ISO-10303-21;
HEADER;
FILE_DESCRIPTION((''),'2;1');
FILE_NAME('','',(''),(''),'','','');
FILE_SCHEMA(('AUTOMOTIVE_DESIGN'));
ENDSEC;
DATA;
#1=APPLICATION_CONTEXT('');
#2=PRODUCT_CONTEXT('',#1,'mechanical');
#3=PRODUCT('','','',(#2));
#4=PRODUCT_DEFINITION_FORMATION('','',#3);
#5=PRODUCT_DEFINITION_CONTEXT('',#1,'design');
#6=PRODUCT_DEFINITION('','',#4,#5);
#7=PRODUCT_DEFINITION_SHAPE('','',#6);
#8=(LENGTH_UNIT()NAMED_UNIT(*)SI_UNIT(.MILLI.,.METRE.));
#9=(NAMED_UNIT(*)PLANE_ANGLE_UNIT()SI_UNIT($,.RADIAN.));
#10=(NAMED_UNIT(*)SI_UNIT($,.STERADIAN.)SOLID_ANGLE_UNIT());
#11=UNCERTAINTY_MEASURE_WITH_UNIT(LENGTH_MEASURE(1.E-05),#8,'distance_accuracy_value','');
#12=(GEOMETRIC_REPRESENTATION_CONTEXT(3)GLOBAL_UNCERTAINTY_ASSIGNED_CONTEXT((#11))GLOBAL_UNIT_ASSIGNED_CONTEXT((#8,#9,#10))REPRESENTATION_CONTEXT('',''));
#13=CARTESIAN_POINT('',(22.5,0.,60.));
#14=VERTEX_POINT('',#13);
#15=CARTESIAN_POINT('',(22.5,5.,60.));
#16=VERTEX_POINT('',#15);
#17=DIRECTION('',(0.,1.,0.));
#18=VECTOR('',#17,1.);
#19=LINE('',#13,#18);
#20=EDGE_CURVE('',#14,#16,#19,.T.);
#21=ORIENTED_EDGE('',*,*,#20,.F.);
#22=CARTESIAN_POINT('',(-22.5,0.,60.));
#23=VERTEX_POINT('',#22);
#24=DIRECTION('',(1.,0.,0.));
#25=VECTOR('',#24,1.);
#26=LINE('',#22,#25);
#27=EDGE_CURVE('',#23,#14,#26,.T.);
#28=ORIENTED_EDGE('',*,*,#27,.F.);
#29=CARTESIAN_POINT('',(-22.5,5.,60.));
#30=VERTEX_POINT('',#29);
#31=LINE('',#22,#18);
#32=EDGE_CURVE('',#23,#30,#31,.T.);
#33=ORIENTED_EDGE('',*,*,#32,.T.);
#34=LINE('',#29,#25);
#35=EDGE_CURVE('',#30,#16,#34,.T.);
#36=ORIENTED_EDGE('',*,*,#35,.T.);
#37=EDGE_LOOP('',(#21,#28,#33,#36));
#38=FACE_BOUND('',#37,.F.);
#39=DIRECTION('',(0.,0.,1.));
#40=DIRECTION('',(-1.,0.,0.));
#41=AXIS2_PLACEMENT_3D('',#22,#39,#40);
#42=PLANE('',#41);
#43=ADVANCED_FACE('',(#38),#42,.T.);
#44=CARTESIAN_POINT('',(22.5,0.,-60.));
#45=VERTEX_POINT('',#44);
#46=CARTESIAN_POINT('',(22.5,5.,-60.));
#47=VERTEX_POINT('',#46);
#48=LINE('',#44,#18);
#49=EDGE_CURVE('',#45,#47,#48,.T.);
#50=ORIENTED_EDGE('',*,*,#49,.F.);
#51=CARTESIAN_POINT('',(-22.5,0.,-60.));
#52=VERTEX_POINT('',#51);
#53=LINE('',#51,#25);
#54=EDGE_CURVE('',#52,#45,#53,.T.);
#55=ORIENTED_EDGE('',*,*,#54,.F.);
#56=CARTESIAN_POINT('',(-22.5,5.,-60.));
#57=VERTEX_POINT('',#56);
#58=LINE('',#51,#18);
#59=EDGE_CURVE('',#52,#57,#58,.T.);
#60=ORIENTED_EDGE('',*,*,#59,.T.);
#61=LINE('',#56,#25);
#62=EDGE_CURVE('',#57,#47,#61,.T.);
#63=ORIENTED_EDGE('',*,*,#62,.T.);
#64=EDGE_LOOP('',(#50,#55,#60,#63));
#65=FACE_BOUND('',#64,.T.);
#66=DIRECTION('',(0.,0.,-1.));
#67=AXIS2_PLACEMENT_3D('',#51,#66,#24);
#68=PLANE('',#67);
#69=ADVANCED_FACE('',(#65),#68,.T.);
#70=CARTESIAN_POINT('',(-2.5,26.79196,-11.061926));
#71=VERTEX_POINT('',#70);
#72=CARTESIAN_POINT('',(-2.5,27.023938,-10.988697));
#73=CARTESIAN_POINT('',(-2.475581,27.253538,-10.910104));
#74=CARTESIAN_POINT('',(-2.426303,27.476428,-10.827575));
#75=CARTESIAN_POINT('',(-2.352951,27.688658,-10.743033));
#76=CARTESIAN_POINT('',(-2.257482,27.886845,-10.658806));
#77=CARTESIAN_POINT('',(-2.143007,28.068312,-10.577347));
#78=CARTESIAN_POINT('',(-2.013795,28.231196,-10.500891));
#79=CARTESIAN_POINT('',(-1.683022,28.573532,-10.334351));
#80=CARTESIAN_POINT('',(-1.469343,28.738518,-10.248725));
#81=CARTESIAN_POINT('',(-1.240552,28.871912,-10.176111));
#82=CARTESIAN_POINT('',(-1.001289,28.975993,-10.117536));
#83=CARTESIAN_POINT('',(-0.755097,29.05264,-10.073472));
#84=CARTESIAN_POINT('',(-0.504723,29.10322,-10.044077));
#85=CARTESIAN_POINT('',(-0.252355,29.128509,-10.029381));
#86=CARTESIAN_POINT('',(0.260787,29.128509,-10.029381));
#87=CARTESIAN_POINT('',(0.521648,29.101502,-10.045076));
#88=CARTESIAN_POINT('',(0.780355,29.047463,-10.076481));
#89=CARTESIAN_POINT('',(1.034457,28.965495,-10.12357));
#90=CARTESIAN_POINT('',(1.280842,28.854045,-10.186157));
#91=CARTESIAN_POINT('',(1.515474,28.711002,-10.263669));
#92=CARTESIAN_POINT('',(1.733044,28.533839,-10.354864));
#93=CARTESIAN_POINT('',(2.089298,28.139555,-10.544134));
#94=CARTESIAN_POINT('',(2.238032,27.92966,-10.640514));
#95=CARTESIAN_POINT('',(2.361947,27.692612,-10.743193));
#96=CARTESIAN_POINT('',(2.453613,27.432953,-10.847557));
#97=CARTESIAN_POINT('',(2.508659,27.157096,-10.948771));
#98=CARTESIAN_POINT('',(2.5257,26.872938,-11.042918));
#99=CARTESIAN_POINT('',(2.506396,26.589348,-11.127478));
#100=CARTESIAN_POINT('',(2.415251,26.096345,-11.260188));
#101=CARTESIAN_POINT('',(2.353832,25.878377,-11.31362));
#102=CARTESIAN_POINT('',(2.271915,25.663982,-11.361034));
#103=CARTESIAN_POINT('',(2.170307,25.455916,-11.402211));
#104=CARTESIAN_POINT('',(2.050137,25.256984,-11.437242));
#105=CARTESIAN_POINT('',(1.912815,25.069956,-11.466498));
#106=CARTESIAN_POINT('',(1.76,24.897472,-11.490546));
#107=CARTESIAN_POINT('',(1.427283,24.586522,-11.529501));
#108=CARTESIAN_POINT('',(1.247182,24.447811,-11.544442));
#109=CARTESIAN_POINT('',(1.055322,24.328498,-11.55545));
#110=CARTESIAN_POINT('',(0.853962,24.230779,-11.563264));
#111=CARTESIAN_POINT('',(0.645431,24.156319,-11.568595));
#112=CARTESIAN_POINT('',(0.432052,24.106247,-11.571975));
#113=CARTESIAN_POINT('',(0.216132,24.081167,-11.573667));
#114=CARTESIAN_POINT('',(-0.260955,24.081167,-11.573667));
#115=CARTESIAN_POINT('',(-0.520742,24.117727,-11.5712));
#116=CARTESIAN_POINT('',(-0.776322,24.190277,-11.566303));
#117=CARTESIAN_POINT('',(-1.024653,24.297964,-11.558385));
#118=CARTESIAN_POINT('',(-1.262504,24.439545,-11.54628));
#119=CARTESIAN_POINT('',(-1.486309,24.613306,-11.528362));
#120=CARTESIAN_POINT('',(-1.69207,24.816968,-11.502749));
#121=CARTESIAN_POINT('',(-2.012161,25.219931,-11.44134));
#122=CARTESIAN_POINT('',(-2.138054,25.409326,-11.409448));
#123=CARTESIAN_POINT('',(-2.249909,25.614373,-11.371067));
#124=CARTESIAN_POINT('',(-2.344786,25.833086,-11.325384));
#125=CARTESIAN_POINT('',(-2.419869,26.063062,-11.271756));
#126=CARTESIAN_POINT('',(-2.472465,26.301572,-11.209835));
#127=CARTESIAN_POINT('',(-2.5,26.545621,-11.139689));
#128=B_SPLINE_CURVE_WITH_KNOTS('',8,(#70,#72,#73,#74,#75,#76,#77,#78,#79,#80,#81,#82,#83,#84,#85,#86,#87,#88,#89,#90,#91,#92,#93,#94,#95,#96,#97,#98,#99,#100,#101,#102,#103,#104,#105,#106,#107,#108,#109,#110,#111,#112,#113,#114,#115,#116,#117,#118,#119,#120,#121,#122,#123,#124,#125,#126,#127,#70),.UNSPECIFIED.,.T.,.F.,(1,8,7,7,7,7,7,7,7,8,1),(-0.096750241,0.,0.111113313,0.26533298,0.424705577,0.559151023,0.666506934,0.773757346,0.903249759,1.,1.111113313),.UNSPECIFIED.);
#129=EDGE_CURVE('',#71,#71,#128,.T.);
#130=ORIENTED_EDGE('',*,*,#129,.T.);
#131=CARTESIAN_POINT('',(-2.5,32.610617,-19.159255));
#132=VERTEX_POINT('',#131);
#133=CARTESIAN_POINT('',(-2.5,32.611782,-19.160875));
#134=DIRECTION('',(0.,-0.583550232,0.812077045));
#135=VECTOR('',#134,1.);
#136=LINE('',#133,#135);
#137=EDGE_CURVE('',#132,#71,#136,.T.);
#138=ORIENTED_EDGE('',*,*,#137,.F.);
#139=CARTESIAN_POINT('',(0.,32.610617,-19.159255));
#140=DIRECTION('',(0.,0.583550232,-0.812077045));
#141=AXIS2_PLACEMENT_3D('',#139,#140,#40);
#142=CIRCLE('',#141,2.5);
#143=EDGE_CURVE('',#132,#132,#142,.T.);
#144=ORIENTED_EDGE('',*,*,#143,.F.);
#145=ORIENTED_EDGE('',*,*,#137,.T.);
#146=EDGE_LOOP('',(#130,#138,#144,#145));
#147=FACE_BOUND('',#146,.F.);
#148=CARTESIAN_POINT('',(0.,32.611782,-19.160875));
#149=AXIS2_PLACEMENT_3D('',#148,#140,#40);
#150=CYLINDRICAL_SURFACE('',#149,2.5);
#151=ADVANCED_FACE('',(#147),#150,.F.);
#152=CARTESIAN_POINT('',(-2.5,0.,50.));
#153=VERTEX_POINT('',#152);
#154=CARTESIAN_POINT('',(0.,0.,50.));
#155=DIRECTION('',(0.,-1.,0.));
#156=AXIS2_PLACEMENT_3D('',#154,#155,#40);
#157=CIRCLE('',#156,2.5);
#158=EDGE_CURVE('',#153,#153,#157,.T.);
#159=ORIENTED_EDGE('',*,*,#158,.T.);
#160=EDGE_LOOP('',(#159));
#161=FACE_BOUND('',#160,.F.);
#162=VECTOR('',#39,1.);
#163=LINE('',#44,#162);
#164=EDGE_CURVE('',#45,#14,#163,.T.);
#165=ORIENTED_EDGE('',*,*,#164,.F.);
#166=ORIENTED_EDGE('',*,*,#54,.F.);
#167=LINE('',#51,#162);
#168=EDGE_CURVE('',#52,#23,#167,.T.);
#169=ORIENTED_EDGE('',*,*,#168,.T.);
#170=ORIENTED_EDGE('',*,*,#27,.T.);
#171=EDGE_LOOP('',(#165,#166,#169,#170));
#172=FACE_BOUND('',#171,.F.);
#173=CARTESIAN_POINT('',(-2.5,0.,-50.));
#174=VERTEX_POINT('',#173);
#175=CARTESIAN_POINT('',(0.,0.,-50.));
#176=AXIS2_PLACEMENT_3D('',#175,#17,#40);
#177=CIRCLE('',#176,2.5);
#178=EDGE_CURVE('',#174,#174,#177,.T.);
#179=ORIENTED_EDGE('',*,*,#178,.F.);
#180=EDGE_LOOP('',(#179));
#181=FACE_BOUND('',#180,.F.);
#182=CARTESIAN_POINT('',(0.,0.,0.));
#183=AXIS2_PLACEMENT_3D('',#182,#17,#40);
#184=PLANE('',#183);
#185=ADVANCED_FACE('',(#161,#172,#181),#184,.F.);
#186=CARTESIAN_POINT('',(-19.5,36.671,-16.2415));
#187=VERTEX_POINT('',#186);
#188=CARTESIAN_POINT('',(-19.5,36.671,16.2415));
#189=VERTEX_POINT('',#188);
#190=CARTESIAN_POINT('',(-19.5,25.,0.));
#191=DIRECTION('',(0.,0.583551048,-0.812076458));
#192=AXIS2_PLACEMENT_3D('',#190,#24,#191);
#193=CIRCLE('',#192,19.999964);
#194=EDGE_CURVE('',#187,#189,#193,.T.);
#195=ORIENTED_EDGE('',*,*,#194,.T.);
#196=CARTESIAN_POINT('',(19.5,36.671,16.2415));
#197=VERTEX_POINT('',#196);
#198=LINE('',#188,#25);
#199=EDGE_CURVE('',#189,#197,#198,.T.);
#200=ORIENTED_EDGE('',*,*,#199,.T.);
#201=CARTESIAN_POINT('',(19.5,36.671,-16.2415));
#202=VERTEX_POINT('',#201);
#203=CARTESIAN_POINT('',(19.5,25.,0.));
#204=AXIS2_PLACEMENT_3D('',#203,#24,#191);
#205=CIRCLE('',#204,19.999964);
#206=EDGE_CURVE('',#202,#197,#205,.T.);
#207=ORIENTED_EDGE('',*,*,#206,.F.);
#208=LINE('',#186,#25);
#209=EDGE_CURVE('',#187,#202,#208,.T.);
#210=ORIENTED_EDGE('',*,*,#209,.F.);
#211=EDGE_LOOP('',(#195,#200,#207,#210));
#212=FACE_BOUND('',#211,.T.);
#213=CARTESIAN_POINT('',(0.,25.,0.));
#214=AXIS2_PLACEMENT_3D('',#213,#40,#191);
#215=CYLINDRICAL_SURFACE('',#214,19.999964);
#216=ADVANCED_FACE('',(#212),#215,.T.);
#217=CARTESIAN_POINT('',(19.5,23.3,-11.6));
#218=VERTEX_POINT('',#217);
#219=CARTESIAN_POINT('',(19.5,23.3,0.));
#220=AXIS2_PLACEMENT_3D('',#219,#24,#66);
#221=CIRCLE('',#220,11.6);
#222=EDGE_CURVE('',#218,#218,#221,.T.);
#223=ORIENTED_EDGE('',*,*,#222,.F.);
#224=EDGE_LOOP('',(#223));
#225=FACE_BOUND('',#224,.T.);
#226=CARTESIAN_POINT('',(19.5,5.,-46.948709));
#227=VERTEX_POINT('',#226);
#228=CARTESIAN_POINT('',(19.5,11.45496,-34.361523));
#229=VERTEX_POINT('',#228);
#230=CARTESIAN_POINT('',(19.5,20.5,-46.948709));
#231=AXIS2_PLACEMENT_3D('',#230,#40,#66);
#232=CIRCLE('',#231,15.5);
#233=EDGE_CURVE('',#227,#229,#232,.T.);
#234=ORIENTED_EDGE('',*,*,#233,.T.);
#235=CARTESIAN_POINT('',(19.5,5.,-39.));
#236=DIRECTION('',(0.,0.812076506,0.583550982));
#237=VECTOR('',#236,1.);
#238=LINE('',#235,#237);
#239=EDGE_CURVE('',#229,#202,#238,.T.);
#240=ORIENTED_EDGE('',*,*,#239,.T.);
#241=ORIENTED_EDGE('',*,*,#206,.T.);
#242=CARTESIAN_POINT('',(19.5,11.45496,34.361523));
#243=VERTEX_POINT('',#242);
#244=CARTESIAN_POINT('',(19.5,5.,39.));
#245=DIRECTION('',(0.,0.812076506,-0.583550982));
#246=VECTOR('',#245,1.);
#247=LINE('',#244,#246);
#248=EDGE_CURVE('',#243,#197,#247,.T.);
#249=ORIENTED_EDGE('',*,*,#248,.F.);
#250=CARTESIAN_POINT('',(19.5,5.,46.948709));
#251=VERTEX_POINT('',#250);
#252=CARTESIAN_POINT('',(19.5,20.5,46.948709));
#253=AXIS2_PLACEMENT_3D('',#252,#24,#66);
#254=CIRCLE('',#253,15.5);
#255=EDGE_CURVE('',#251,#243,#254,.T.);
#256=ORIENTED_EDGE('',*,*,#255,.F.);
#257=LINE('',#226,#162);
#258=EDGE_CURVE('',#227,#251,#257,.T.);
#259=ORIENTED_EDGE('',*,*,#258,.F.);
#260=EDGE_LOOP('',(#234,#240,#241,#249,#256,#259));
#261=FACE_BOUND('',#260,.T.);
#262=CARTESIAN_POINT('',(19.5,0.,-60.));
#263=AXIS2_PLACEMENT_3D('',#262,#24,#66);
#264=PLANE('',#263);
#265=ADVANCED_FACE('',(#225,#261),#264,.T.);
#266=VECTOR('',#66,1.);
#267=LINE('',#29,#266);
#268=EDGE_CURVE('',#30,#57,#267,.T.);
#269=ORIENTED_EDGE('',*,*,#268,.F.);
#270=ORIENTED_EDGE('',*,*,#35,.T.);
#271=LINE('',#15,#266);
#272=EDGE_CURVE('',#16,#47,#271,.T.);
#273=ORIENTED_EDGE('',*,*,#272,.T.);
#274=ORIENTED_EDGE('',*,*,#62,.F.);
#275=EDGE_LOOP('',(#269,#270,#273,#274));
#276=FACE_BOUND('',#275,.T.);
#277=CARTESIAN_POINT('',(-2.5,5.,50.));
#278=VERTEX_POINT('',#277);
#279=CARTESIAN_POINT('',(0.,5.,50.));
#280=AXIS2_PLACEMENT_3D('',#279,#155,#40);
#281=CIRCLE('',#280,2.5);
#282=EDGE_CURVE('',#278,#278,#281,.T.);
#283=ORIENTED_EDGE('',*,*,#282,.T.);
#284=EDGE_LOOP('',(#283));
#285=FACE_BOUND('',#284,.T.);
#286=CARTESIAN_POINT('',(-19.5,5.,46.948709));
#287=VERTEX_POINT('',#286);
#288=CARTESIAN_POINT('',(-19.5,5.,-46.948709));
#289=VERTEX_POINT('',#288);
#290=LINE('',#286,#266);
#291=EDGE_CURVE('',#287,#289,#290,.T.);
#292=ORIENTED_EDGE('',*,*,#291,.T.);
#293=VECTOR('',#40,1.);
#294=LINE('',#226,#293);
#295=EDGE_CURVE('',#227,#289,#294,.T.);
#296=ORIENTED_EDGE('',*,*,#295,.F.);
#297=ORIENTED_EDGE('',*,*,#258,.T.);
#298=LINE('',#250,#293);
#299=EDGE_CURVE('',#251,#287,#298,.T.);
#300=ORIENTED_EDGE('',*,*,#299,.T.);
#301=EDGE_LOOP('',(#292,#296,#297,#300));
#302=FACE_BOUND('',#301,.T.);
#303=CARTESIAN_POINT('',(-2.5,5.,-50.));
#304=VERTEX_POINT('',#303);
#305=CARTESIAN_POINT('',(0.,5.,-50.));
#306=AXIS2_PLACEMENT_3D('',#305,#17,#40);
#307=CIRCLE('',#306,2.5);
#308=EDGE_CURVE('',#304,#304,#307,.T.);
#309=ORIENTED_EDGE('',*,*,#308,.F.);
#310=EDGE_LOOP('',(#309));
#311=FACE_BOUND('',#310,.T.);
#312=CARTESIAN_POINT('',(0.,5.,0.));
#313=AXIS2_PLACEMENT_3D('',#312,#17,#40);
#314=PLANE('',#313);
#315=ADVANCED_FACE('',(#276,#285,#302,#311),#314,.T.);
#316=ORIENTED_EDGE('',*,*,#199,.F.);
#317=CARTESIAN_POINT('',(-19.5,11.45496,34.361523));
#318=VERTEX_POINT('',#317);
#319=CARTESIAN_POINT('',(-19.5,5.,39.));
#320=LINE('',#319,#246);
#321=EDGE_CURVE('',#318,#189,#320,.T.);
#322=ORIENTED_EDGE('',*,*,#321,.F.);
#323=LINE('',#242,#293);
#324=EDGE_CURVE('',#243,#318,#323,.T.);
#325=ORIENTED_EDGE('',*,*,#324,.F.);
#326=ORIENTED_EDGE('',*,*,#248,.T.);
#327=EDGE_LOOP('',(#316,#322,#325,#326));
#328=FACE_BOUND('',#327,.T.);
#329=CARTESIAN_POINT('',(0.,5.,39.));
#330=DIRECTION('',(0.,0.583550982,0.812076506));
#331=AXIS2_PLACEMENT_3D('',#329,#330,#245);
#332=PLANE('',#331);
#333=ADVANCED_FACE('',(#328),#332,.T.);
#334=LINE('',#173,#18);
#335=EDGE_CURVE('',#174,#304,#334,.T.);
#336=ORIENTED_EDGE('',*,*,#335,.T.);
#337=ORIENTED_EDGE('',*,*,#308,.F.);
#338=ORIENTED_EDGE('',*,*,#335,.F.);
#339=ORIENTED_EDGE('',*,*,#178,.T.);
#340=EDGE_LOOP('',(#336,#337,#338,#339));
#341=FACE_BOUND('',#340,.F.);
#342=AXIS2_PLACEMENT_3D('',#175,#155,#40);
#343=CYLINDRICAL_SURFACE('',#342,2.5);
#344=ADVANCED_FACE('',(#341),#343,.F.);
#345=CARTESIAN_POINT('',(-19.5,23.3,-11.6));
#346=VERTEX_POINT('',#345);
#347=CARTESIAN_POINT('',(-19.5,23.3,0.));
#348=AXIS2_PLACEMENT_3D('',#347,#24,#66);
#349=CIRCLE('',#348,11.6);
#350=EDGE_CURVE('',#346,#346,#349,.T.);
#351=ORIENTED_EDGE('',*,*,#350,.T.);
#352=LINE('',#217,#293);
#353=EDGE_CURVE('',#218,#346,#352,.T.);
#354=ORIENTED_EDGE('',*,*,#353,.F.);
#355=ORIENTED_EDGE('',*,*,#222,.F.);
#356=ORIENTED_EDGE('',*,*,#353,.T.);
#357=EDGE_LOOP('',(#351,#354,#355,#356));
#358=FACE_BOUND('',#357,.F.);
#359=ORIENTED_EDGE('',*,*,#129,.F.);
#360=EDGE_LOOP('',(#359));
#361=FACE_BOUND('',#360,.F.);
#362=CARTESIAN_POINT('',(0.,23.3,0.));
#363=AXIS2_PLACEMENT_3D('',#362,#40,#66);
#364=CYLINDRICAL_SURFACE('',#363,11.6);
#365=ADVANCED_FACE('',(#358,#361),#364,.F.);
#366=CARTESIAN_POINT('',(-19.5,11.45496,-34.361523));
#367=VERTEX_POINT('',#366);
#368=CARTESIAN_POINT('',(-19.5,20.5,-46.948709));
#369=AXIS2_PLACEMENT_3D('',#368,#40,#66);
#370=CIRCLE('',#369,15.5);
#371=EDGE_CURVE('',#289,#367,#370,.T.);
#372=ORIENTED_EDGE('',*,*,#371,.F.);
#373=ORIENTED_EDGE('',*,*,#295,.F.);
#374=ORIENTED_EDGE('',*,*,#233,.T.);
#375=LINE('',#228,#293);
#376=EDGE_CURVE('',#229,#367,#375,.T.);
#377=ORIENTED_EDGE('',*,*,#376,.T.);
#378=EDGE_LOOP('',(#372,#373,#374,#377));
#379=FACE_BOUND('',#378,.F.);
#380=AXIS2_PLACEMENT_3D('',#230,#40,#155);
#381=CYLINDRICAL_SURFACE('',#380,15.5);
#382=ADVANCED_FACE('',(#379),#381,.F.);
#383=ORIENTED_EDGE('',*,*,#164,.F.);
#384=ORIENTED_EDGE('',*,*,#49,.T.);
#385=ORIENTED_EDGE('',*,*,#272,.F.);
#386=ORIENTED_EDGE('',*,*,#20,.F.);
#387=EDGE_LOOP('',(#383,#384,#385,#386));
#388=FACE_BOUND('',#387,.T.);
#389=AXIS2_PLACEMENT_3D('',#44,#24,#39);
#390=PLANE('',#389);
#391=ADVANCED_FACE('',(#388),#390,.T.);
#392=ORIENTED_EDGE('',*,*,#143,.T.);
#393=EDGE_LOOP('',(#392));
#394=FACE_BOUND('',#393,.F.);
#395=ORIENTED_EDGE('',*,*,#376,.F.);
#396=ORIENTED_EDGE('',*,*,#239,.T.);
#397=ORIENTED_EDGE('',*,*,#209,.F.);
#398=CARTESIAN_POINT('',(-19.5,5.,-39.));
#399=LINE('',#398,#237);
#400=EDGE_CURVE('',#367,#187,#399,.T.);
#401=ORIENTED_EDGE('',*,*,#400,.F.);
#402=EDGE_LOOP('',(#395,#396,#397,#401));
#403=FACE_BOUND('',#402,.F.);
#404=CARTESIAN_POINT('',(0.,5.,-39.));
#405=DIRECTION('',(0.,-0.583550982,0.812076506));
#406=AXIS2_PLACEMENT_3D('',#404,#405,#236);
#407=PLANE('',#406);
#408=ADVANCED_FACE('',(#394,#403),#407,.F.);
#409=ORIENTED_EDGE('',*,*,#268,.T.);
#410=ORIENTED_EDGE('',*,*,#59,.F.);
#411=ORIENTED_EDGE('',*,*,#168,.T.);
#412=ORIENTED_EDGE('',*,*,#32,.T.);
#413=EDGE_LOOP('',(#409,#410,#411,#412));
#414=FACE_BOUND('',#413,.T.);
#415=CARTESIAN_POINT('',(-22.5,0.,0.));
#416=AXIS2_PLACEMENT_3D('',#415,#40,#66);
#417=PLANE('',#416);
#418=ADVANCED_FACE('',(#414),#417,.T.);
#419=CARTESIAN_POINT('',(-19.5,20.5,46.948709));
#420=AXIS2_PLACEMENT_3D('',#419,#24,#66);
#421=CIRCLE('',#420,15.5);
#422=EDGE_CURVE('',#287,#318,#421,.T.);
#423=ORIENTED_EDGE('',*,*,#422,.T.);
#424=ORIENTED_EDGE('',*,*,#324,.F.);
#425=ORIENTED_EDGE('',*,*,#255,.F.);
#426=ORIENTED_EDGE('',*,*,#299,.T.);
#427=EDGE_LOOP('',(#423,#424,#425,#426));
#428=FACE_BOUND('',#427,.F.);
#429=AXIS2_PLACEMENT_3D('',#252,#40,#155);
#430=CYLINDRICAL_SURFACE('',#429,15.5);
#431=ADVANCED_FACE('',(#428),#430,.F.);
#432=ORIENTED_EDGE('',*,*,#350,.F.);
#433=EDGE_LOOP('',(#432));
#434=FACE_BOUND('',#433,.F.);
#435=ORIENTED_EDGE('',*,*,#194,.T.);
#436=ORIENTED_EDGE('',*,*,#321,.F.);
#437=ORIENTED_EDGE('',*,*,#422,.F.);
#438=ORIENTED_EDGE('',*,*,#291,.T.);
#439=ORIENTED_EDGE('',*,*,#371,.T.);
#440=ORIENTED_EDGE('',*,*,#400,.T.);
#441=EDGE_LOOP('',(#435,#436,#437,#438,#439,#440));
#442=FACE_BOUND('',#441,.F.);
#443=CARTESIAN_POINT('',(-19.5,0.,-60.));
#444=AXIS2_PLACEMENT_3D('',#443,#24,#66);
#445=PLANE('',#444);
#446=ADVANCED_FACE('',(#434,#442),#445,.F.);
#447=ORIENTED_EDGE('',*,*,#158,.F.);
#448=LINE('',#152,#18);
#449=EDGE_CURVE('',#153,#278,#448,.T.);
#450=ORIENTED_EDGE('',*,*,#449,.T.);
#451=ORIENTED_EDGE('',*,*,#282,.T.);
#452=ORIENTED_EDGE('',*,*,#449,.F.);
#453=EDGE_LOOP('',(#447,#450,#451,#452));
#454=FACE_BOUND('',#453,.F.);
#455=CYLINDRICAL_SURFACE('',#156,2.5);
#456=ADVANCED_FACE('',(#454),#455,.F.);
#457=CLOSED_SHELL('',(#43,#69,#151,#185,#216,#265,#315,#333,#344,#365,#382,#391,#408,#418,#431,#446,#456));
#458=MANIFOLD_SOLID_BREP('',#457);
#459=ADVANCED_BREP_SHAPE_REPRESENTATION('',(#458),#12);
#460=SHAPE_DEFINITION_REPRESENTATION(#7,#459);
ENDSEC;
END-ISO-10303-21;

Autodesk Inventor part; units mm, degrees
ref_plane "YZ Plane" through (0, 0, 0) normal (1, 0, 0) x (0, 1, 0)
ref_plane "XZ Plane" through (0, 0, 0) normal (0, 1, 0) x (-1, 0, 0)
ref_plane "XY Plane" through (0, 0, 0) normal (0, 0, 1) x (1, 0, 0)
sketch "Sketch6" plane through (0, 0, 0) normal (0, 1, 0) x (-1, 0, 0)
  line L0 (22.5, 0) -> (22.5, -60)
  line L1 (22.5, -60) -> (-22.5, -60)
  line L2 (-22.5, -60) -> (-22.5, 0)
  circle A0 centre (0, -50) radius 2.5
  line L3 (-22.5, 0) -> (22.5, 0)
  point P0 (0, 0)
  dimension "d85" = 22.5
  dimension "d86" = 60
  dimension "d87" = 45
  dimension "d89" = 5
extrude "Extrusion3" add sketch "Sketch6" along normal blind 5
mirror "Mirror3" about plane through (-22.5, 0, 0) normal (0, 0, 1) of "Extrusion3"
sketch "Sketch7" plane through (0, 0, -60) normal (1, 0, 0) x (0, 0, -1)
  arc A0 (-43.7585, 36.671) -> (-76.2415, 36.671) centre (-60, 25) ccw
  circle A1 centre (-60, 23.3) radius 11.6
  line L0 (0, 5) -> (-120, 5) projected
  line L1 (-60, 5) -> (-99, 5)
  line L2 (-99, 5) -> (-76.2415, 36.671)
  line L3 (-60, 5) -> (-21, 5)
  line L4 (-21, 5) -> (-43.7585, 36.671)
  line L5 (-21, 5) -> (-99, 5)
  line L6 (-60, 17.6583) -> (-60, 50) construction
  line L7 (-120, 0) -> (0, 0) projected
  point P0 (-60, 0)
  point P1 (-60, 0)
  point P2 (-60, 0)
  dimension "d92" = 40
  dimension "d93" = 23.2
  dimension "d94" = 39
  dimension "d95" = 39
  dimension "d104" = 23.3
  dimension "d105" = 25
extrude "Extrusion6" add sketch "Sketch7" along normal mid plane 39
sketch "Sketch10" plane through (19.5, 0, -60) normal (1, 0, 0) x (0, 0, -1)
  circle A0 centre (-60, 23.3) radius 11.6 construction
  point P0 (-60, 0)
hole "Hole4" at (19.5, 23.3, 0) direction (-1, 0, 0) diameter 22.25 depth 7
sketch "Sketch11" plane through (-19.5, 0, -60) normal (-1, 0, 0) x (0, 0, 1)
  circle A0 centre (60, 23.3) radius 11.6 projected
  point P0 (60, 0)
hole "Hole5" at (-19.5, 23.3, 0) at (-19.5, 23.3, 0) direction (1, 0, 0) diameter 22.3 depth 7
fillet "Fillet1" radius 15.5 2 edges at (0, 5, 39) (0, 5, -39)
sketch "Sketch12" plane through (19.5, 36.671, -16.2415) normal (0, 0.5835502, -0.812077) x (-1, 0, 0)
  circle A0 centre (19.5, -5) radius 2.5
  point P0 (19.5, -20.3019)
  dimension "d121" = 5
extrude "Extrusion7" cut sketch "Sketch12" against normal blind 28.75
properties part number "8P - MainWing Joint"
